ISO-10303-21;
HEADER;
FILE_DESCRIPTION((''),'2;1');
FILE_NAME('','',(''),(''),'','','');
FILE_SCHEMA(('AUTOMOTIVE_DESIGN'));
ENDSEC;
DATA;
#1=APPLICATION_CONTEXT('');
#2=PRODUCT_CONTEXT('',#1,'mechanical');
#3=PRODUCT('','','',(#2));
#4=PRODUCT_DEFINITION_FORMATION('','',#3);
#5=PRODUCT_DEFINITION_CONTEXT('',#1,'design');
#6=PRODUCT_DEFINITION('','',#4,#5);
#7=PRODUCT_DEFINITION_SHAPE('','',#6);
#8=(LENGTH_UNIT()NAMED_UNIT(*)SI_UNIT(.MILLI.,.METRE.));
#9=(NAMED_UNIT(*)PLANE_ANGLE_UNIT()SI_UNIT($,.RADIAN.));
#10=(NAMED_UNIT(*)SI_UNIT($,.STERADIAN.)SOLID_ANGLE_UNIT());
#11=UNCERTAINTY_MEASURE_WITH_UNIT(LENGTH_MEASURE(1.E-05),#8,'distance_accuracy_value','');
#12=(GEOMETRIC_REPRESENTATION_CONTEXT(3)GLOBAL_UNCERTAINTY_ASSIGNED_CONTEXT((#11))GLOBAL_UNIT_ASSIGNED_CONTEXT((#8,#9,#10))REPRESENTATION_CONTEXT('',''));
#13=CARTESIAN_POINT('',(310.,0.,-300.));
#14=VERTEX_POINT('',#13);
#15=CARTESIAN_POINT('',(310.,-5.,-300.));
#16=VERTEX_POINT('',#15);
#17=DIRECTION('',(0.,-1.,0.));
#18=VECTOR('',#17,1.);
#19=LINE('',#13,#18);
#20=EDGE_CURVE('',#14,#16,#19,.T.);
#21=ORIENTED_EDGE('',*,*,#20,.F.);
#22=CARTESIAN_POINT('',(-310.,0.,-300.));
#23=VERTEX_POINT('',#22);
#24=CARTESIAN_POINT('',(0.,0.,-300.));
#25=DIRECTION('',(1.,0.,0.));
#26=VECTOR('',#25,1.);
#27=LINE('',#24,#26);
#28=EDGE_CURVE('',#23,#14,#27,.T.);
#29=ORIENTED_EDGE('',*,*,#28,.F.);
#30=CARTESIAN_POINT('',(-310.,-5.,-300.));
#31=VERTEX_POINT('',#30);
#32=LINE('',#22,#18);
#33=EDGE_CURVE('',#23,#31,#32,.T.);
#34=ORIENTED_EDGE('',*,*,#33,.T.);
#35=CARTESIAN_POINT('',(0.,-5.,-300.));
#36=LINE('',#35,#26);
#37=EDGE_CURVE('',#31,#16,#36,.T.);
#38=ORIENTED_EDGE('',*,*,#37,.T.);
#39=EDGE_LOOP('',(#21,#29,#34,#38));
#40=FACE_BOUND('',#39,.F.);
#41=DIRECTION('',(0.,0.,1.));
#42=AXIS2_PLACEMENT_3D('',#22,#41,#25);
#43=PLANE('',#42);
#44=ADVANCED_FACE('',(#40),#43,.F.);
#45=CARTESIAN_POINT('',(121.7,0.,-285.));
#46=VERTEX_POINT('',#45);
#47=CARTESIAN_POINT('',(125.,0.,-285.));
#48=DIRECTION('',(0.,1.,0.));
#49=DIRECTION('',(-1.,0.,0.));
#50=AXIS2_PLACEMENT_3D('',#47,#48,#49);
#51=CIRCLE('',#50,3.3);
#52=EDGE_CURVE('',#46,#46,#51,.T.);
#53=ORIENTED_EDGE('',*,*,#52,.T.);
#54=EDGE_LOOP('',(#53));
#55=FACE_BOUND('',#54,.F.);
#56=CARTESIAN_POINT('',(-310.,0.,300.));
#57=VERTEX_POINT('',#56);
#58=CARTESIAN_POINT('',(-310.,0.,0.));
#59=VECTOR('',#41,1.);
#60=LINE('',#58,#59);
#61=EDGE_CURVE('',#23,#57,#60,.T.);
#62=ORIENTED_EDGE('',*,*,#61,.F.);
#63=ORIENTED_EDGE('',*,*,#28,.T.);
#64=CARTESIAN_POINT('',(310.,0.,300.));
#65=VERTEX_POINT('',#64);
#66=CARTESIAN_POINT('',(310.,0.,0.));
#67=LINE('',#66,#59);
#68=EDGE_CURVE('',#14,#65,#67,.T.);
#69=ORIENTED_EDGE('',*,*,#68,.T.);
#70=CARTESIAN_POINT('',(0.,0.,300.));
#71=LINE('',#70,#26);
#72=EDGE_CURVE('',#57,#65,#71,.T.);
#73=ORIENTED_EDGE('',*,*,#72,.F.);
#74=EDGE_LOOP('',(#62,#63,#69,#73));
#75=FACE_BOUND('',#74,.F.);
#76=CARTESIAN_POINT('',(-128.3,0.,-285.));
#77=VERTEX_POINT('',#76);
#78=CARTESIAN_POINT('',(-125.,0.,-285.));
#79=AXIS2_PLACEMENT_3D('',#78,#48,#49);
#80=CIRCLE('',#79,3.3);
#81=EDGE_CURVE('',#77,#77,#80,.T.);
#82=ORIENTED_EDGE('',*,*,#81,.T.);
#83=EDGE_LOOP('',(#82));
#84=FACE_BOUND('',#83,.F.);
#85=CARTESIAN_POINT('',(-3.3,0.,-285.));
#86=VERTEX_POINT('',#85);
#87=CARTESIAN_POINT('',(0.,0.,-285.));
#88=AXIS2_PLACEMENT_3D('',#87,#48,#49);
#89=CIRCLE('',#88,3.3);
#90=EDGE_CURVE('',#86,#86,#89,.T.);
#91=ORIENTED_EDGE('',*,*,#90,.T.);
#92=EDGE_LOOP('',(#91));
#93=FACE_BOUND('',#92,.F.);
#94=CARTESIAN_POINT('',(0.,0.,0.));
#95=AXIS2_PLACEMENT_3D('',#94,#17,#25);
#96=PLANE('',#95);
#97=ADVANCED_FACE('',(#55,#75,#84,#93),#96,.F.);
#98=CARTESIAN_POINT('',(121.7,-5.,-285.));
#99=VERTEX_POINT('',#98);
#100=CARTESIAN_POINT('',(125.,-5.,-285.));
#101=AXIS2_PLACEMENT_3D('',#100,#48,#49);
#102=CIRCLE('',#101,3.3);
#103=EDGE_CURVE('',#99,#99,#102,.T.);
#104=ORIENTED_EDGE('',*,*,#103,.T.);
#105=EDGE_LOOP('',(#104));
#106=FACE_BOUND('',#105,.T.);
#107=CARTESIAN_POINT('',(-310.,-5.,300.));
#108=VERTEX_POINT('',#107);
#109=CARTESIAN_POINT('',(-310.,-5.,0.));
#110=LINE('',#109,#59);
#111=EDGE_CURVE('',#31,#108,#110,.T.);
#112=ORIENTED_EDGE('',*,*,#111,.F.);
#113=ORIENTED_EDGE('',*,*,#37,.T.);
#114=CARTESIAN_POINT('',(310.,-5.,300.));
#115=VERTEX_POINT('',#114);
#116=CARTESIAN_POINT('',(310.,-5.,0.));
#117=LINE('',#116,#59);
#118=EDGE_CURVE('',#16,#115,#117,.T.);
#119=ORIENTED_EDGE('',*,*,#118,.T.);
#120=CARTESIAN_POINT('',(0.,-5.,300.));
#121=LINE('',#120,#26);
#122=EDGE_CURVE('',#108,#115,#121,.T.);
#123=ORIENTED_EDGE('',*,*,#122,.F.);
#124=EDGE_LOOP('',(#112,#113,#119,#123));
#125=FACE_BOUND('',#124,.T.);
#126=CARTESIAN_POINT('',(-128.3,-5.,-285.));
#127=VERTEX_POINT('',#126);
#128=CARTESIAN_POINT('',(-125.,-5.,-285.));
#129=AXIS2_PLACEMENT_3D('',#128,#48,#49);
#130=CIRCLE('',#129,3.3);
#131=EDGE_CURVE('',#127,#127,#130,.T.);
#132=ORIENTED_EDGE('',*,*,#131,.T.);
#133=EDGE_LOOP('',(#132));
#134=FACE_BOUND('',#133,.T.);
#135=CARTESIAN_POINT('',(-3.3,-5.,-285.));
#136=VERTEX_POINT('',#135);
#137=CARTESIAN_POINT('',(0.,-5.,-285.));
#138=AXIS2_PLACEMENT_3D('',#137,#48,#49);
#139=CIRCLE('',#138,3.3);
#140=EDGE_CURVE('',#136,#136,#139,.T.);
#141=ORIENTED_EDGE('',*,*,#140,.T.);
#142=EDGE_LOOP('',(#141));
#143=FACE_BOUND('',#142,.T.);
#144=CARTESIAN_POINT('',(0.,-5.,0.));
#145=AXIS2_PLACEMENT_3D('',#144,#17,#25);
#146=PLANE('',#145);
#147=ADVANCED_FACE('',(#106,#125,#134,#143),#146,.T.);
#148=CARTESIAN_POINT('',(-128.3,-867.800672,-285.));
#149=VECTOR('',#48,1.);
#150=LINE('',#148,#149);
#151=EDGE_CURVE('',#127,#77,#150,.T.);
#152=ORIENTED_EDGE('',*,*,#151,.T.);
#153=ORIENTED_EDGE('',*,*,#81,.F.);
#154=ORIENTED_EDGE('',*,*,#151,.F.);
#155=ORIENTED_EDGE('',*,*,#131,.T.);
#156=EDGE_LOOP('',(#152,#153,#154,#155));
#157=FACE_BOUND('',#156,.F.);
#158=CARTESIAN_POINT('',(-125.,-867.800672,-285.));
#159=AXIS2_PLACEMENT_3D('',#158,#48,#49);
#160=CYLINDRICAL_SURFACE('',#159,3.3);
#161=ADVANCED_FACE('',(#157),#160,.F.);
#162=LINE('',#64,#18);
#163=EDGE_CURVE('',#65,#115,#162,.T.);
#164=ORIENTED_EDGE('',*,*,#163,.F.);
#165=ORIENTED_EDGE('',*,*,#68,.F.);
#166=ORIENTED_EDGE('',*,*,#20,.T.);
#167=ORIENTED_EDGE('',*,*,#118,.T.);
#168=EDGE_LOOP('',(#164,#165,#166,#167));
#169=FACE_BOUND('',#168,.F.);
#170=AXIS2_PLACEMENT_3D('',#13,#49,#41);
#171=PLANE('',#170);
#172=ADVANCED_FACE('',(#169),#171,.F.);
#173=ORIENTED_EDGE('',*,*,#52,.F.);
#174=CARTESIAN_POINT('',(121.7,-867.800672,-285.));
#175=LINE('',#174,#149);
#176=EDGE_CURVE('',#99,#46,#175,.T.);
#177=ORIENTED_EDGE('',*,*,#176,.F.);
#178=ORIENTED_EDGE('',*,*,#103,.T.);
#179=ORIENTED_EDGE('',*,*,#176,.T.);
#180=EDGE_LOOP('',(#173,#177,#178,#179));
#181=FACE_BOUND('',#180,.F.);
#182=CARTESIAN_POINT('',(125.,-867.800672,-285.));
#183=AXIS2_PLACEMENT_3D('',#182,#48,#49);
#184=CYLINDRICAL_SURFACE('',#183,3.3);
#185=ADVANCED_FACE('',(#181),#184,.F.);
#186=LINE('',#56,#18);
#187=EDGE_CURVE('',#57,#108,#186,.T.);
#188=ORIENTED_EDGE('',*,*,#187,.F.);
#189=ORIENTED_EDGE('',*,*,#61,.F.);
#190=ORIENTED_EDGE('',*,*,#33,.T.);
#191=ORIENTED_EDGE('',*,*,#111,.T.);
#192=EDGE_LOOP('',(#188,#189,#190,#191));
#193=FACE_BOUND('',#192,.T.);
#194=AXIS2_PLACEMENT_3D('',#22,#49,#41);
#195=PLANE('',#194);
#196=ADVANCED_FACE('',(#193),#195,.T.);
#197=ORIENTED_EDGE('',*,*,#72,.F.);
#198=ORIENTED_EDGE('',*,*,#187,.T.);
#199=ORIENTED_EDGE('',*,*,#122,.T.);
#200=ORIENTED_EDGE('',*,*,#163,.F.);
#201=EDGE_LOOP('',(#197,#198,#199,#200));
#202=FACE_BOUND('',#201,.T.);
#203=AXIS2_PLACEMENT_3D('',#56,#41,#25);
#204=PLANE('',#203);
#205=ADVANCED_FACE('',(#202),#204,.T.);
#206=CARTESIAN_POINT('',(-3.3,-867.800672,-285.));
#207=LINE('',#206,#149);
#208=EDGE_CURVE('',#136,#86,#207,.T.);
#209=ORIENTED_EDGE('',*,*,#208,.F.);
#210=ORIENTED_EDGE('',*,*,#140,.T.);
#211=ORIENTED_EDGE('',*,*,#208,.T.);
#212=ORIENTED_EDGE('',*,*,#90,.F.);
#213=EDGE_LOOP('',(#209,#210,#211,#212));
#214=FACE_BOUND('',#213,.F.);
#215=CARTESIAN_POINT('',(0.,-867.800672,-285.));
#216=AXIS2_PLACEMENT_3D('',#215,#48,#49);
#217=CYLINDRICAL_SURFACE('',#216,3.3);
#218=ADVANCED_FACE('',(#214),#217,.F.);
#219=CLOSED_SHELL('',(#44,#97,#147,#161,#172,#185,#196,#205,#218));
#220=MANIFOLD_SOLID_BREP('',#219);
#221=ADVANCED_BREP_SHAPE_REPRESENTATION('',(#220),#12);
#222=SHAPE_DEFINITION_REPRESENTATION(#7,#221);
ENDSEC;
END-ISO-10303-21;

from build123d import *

# Parameters (mm, degrees)
F0_W     = 620
F0_H     = 600
F1_DEPTH = 5
F3_D     = 6.6


# Not quite as in the source:
# - a feature names something its author has since deleted; it is built from what else it names


with BuildPart() as f1:
    # F0 (on Front) → F1 (new body)
    with BuildSketch(Plane.XZ):
        Rectangle(F0_W, F0_H)
    extrude(amount=F1_DEPTH)

    # F3 (through all)
    with Locations(Plane.XZ.offset(5)):
        with Locations((-125, -285), (125, -285), (0, -285)):
            Hole(F3_D / 2)


solid = f1.part
